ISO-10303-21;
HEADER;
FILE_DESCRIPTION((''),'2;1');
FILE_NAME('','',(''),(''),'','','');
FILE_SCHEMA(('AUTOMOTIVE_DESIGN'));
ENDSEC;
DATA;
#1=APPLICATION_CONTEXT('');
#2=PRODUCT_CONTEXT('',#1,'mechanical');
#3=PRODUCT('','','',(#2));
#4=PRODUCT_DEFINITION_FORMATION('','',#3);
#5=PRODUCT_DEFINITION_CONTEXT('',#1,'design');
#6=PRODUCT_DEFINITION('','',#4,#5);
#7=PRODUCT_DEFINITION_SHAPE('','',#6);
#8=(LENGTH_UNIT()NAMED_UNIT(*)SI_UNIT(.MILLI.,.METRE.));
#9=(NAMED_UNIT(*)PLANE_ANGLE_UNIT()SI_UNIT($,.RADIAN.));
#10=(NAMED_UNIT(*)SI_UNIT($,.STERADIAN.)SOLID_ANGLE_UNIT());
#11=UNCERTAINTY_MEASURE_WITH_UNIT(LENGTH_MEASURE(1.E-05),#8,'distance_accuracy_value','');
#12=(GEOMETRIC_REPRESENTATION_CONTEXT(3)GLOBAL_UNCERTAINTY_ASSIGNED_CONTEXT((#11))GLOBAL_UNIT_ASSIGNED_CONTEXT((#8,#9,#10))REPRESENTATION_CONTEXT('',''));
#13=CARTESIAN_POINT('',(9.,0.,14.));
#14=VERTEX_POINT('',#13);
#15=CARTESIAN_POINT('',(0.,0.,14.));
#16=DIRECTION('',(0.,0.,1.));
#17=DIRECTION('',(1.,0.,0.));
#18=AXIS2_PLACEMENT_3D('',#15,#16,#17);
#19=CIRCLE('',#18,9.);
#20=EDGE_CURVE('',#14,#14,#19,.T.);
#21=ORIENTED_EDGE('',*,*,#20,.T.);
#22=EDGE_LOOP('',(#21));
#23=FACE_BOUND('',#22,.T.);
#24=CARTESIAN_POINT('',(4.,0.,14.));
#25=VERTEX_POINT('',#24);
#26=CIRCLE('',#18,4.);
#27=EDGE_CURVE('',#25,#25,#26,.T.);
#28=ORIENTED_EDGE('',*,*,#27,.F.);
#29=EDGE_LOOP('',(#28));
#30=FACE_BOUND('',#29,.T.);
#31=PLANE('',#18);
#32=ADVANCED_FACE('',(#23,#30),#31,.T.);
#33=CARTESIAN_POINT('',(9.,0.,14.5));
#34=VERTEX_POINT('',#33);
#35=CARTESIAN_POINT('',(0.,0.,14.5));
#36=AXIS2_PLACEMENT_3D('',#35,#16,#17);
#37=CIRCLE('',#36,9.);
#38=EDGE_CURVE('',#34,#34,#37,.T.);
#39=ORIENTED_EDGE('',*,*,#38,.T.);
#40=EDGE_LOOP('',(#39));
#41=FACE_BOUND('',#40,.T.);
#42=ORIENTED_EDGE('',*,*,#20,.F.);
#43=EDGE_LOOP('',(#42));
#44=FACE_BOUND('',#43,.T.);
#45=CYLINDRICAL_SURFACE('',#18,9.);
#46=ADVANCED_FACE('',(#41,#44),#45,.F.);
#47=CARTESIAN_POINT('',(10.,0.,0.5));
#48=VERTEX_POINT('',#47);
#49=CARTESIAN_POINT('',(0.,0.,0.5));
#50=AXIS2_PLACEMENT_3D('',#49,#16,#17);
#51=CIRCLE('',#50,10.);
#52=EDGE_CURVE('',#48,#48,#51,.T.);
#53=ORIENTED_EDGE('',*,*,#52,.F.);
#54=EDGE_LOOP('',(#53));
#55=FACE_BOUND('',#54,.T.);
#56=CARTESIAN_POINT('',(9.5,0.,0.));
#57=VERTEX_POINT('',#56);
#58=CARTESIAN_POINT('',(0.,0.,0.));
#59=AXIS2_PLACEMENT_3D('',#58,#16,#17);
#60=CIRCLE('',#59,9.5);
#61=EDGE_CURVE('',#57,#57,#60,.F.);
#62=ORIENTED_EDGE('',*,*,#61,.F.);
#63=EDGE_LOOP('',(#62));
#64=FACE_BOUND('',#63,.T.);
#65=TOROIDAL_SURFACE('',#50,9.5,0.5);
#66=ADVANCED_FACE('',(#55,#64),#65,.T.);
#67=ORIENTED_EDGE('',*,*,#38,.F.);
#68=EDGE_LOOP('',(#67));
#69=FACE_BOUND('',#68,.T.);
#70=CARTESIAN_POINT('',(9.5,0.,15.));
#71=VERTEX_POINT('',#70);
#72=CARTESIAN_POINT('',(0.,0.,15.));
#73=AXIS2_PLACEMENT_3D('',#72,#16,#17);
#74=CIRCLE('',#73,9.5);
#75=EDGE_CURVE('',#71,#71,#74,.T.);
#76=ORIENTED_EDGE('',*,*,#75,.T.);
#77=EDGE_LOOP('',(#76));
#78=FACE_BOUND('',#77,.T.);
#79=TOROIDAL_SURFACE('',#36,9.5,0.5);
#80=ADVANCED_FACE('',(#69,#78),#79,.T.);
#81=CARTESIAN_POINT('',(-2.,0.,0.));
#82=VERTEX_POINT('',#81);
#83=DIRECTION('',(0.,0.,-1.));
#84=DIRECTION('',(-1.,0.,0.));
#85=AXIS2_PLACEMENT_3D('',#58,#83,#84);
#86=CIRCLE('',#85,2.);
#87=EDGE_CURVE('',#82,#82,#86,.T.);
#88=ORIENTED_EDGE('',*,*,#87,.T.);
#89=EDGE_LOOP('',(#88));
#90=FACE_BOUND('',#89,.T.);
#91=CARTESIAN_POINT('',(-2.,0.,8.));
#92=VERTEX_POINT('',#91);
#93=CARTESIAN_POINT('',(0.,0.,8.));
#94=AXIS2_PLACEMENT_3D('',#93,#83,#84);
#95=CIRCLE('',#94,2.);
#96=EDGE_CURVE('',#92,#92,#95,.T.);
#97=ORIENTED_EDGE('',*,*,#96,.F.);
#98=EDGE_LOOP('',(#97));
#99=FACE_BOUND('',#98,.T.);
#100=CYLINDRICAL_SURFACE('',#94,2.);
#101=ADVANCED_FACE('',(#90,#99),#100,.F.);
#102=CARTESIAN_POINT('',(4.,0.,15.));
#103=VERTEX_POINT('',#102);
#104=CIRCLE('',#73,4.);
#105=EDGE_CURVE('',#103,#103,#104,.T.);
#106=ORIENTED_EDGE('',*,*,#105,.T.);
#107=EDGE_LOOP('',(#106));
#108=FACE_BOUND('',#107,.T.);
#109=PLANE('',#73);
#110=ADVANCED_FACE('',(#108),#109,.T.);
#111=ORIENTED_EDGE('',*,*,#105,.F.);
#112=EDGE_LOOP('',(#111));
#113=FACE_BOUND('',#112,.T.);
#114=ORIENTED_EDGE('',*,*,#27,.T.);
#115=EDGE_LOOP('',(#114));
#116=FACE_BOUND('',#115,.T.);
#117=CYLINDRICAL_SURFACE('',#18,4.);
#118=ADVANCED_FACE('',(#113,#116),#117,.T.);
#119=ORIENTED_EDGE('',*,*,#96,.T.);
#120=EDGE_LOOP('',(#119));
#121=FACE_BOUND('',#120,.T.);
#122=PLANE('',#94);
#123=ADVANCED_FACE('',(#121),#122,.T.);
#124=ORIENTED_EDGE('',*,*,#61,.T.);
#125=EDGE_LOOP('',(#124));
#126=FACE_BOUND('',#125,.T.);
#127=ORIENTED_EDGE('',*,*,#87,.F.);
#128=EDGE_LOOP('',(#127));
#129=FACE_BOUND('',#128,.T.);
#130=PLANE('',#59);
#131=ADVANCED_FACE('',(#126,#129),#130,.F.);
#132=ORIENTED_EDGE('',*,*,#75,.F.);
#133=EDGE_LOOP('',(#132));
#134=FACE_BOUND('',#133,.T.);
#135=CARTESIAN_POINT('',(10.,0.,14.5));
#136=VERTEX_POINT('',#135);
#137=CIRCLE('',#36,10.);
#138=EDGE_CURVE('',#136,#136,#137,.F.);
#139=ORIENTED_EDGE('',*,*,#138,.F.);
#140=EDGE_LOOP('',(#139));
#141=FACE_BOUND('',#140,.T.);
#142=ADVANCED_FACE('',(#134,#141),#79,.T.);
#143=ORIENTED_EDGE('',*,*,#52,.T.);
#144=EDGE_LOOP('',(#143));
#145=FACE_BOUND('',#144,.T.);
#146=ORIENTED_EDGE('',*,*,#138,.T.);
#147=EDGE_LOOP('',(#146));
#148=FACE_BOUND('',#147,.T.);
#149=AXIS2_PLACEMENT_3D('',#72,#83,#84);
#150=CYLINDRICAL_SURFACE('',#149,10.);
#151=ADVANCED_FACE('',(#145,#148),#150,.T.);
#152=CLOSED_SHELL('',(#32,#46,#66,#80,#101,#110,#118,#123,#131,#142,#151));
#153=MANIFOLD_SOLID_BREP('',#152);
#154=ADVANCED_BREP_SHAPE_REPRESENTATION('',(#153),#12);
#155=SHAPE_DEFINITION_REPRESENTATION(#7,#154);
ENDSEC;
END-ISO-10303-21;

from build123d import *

# Parameters (mm, degrees)
SKETCH_1_R          = 10
EXTRUDE_1_DEPTH     = 15
SKETCH_2_R          = 9
SKETCH_2_R_2        = 4
CUT_EXTRUDE_1_DEPTH = 1
FILLET_1_R          = 0.5
SKETCH_3_R          = 2
CUT_EXTRUDE_2_DEPTH = 8


with BuildPart() as part:
    # 草图1 → 凸台-拉伸1 (new body)
    with BuildSketch(Plane.XY):
        Circle(SKETCH_1_R)
    extrude(amount=EXTRUDE_1_DEPTH)

    # 草图2 → 切除-拉伸1 (cut)
    with BuildSketch(Plane.XY.offset(15)):
        Circle(SKETCH_2_R)
        Circle(SKETCH_2_R_2, mode=Mode.SUBTRACT)
    extrude(amount=-CUT_EXTRUDE_1_DEPTH, mode=Mode.SUBTRACT)

    # 圆角1
    fillet_1_edges = [part.edges().sort_by_distance(p)[0] for p in [
        (-10, 0, 0),
        (-10, 0, 15),
        (-9, 0, 15),
    ]]
    fillet(fillet_1_edges, radius=FILLET_1_R - 0.0001)  # a hair under: the kernel refuses the full size

    # 草图3 → 切除-拉伸2 (cut)
    with BuildSketch(Plane(origin=(0, 0, 0), x_dir=(-1, 0, 0), z_dir=(0, 0, -1))):
        Circle(SKETCH_3_R)
    extrude(amount=-CUT_EXTRUDE_2_DEPTH, mode=Mode.SUBTRACT)


solid = part.part
